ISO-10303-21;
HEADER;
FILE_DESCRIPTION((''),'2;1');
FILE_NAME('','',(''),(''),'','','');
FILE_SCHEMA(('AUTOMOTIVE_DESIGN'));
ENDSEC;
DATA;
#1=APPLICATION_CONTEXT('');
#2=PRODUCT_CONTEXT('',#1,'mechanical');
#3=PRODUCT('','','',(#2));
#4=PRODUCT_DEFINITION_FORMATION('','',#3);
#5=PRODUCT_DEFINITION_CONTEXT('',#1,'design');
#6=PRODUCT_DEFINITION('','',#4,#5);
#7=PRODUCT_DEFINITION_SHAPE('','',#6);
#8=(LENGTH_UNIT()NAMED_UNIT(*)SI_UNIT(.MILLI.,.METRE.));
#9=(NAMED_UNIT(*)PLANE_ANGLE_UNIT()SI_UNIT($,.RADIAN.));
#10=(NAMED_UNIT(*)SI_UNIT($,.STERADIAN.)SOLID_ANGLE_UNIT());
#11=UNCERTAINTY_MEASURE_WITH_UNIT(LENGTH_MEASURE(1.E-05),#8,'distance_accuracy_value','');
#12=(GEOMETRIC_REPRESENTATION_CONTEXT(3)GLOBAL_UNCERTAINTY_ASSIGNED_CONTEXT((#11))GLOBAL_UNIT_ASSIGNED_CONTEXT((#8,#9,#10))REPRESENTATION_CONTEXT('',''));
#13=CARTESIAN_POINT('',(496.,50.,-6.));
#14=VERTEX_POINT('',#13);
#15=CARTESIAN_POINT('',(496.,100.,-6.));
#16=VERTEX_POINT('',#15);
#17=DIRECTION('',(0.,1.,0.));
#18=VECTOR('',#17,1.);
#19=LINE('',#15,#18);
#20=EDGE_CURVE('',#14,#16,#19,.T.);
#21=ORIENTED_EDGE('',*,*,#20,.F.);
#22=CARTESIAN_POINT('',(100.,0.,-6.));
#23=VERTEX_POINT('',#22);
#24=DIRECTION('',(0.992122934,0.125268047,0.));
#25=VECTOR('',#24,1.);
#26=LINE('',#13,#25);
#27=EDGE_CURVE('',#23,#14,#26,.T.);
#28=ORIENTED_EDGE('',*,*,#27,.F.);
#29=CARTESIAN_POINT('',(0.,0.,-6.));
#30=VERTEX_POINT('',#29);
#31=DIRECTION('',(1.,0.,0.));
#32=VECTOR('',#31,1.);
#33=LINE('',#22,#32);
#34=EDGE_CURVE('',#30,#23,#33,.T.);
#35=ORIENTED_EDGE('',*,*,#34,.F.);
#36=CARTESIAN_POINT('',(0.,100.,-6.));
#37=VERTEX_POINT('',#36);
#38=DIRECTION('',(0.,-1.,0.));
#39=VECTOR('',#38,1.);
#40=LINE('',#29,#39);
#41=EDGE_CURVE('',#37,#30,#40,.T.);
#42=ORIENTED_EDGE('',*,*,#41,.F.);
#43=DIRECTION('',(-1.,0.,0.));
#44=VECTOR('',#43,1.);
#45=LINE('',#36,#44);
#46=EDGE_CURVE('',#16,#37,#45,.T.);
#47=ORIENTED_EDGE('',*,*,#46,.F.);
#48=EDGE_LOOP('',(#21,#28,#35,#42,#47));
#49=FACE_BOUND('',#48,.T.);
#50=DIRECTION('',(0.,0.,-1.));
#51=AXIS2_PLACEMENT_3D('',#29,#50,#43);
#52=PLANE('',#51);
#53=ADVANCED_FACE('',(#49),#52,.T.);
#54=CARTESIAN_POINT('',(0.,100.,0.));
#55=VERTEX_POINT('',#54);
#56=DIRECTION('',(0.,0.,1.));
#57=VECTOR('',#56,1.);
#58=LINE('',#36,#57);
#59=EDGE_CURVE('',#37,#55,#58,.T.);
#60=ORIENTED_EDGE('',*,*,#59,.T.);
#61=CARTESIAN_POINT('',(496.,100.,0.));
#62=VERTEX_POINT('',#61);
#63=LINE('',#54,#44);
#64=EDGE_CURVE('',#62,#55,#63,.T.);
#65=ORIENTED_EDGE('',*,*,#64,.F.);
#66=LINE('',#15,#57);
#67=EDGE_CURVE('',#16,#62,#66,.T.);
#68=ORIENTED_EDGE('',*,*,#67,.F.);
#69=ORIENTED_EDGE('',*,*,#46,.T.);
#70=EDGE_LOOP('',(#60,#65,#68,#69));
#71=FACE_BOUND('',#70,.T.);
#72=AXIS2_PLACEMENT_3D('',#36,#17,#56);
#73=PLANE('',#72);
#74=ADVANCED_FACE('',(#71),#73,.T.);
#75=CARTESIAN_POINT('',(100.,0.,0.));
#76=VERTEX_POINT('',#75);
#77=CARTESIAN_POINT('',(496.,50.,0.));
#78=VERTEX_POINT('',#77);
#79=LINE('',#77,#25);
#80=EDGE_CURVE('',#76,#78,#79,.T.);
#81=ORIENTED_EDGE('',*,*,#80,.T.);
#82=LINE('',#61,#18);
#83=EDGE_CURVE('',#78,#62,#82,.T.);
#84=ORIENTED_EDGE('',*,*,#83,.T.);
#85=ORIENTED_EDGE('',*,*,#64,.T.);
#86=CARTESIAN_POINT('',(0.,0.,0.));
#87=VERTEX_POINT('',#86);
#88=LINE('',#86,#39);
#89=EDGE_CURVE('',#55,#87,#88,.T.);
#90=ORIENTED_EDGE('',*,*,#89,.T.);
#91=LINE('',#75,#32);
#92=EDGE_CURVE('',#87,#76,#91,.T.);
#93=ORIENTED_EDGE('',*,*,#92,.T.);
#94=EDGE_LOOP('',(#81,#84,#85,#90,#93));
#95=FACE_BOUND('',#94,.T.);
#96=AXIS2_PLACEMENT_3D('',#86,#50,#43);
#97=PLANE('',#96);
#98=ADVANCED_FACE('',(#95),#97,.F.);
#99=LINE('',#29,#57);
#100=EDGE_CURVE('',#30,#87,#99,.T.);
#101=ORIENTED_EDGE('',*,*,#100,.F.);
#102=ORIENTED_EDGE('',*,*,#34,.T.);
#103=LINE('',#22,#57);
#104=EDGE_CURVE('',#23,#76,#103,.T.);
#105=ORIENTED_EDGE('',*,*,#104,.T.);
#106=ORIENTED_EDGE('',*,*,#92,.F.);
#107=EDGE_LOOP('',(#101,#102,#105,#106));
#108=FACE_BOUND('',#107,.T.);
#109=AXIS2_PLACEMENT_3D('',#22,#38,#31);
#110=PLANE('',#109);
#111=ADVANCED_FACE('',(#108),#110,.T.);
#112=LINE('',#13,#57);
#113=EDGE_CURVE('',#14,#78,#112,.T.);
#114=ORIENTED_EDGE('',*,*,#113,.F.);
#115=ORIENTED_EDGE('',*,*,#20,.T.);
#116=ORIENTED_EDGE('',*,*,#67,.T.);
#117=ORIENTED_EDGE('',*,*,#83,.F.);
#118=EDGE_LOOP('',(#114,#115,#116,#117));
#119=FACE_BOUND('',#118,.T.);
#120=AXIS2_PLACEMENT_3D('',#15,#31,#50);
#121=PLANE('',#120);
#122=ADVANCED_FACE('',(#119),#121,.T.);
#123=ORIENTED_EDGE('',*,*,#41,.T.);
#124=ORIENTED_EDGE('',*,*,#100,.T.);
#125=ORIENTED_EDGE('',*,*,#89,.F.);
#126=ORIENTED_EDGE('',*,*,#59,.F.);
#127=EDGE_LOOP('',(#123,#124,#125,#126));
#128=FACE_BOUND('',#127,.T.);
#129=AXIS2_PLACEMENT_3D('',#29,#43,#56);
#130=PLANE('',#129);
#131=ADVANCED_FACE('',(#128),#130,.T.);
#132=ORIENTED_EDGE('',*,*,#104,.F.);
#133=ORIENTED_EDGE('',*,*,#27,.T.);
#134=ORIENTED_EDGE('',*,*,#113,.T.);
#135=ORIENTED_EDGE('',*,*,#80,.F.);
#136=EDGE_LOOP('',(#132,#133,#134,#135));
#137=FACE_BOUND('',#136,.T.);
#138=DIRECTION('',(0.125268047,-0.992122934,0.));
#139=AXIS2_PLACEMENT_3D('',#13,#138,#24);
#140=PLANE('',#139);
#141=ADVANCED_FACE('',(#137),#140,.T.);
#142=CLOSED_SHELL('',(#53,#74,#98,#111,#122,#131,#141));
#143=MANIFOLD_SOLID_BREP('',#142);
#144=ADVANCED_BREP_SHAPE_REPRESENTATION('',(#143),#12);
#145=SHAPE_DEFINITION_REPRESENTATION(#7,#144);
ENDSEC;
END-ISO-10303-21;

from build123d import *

# Parameters (mm, degrees)
SM_BASE_FLANGE_1_DEPTH = 6


# Sheet-metal steps are written as plain solids
with BuildPart() as part:
    # Sketch 1 → 基体-法兰1 (new body)
    with BuildSketch(Plane.XY):
        Polygon((0, 0), (0, 100), (496, 100), (496, 50), (100, 0), align=None)
    extrude(amount=-SM_BASE_FLANGE_1_DEPTH)


solid = part.part
